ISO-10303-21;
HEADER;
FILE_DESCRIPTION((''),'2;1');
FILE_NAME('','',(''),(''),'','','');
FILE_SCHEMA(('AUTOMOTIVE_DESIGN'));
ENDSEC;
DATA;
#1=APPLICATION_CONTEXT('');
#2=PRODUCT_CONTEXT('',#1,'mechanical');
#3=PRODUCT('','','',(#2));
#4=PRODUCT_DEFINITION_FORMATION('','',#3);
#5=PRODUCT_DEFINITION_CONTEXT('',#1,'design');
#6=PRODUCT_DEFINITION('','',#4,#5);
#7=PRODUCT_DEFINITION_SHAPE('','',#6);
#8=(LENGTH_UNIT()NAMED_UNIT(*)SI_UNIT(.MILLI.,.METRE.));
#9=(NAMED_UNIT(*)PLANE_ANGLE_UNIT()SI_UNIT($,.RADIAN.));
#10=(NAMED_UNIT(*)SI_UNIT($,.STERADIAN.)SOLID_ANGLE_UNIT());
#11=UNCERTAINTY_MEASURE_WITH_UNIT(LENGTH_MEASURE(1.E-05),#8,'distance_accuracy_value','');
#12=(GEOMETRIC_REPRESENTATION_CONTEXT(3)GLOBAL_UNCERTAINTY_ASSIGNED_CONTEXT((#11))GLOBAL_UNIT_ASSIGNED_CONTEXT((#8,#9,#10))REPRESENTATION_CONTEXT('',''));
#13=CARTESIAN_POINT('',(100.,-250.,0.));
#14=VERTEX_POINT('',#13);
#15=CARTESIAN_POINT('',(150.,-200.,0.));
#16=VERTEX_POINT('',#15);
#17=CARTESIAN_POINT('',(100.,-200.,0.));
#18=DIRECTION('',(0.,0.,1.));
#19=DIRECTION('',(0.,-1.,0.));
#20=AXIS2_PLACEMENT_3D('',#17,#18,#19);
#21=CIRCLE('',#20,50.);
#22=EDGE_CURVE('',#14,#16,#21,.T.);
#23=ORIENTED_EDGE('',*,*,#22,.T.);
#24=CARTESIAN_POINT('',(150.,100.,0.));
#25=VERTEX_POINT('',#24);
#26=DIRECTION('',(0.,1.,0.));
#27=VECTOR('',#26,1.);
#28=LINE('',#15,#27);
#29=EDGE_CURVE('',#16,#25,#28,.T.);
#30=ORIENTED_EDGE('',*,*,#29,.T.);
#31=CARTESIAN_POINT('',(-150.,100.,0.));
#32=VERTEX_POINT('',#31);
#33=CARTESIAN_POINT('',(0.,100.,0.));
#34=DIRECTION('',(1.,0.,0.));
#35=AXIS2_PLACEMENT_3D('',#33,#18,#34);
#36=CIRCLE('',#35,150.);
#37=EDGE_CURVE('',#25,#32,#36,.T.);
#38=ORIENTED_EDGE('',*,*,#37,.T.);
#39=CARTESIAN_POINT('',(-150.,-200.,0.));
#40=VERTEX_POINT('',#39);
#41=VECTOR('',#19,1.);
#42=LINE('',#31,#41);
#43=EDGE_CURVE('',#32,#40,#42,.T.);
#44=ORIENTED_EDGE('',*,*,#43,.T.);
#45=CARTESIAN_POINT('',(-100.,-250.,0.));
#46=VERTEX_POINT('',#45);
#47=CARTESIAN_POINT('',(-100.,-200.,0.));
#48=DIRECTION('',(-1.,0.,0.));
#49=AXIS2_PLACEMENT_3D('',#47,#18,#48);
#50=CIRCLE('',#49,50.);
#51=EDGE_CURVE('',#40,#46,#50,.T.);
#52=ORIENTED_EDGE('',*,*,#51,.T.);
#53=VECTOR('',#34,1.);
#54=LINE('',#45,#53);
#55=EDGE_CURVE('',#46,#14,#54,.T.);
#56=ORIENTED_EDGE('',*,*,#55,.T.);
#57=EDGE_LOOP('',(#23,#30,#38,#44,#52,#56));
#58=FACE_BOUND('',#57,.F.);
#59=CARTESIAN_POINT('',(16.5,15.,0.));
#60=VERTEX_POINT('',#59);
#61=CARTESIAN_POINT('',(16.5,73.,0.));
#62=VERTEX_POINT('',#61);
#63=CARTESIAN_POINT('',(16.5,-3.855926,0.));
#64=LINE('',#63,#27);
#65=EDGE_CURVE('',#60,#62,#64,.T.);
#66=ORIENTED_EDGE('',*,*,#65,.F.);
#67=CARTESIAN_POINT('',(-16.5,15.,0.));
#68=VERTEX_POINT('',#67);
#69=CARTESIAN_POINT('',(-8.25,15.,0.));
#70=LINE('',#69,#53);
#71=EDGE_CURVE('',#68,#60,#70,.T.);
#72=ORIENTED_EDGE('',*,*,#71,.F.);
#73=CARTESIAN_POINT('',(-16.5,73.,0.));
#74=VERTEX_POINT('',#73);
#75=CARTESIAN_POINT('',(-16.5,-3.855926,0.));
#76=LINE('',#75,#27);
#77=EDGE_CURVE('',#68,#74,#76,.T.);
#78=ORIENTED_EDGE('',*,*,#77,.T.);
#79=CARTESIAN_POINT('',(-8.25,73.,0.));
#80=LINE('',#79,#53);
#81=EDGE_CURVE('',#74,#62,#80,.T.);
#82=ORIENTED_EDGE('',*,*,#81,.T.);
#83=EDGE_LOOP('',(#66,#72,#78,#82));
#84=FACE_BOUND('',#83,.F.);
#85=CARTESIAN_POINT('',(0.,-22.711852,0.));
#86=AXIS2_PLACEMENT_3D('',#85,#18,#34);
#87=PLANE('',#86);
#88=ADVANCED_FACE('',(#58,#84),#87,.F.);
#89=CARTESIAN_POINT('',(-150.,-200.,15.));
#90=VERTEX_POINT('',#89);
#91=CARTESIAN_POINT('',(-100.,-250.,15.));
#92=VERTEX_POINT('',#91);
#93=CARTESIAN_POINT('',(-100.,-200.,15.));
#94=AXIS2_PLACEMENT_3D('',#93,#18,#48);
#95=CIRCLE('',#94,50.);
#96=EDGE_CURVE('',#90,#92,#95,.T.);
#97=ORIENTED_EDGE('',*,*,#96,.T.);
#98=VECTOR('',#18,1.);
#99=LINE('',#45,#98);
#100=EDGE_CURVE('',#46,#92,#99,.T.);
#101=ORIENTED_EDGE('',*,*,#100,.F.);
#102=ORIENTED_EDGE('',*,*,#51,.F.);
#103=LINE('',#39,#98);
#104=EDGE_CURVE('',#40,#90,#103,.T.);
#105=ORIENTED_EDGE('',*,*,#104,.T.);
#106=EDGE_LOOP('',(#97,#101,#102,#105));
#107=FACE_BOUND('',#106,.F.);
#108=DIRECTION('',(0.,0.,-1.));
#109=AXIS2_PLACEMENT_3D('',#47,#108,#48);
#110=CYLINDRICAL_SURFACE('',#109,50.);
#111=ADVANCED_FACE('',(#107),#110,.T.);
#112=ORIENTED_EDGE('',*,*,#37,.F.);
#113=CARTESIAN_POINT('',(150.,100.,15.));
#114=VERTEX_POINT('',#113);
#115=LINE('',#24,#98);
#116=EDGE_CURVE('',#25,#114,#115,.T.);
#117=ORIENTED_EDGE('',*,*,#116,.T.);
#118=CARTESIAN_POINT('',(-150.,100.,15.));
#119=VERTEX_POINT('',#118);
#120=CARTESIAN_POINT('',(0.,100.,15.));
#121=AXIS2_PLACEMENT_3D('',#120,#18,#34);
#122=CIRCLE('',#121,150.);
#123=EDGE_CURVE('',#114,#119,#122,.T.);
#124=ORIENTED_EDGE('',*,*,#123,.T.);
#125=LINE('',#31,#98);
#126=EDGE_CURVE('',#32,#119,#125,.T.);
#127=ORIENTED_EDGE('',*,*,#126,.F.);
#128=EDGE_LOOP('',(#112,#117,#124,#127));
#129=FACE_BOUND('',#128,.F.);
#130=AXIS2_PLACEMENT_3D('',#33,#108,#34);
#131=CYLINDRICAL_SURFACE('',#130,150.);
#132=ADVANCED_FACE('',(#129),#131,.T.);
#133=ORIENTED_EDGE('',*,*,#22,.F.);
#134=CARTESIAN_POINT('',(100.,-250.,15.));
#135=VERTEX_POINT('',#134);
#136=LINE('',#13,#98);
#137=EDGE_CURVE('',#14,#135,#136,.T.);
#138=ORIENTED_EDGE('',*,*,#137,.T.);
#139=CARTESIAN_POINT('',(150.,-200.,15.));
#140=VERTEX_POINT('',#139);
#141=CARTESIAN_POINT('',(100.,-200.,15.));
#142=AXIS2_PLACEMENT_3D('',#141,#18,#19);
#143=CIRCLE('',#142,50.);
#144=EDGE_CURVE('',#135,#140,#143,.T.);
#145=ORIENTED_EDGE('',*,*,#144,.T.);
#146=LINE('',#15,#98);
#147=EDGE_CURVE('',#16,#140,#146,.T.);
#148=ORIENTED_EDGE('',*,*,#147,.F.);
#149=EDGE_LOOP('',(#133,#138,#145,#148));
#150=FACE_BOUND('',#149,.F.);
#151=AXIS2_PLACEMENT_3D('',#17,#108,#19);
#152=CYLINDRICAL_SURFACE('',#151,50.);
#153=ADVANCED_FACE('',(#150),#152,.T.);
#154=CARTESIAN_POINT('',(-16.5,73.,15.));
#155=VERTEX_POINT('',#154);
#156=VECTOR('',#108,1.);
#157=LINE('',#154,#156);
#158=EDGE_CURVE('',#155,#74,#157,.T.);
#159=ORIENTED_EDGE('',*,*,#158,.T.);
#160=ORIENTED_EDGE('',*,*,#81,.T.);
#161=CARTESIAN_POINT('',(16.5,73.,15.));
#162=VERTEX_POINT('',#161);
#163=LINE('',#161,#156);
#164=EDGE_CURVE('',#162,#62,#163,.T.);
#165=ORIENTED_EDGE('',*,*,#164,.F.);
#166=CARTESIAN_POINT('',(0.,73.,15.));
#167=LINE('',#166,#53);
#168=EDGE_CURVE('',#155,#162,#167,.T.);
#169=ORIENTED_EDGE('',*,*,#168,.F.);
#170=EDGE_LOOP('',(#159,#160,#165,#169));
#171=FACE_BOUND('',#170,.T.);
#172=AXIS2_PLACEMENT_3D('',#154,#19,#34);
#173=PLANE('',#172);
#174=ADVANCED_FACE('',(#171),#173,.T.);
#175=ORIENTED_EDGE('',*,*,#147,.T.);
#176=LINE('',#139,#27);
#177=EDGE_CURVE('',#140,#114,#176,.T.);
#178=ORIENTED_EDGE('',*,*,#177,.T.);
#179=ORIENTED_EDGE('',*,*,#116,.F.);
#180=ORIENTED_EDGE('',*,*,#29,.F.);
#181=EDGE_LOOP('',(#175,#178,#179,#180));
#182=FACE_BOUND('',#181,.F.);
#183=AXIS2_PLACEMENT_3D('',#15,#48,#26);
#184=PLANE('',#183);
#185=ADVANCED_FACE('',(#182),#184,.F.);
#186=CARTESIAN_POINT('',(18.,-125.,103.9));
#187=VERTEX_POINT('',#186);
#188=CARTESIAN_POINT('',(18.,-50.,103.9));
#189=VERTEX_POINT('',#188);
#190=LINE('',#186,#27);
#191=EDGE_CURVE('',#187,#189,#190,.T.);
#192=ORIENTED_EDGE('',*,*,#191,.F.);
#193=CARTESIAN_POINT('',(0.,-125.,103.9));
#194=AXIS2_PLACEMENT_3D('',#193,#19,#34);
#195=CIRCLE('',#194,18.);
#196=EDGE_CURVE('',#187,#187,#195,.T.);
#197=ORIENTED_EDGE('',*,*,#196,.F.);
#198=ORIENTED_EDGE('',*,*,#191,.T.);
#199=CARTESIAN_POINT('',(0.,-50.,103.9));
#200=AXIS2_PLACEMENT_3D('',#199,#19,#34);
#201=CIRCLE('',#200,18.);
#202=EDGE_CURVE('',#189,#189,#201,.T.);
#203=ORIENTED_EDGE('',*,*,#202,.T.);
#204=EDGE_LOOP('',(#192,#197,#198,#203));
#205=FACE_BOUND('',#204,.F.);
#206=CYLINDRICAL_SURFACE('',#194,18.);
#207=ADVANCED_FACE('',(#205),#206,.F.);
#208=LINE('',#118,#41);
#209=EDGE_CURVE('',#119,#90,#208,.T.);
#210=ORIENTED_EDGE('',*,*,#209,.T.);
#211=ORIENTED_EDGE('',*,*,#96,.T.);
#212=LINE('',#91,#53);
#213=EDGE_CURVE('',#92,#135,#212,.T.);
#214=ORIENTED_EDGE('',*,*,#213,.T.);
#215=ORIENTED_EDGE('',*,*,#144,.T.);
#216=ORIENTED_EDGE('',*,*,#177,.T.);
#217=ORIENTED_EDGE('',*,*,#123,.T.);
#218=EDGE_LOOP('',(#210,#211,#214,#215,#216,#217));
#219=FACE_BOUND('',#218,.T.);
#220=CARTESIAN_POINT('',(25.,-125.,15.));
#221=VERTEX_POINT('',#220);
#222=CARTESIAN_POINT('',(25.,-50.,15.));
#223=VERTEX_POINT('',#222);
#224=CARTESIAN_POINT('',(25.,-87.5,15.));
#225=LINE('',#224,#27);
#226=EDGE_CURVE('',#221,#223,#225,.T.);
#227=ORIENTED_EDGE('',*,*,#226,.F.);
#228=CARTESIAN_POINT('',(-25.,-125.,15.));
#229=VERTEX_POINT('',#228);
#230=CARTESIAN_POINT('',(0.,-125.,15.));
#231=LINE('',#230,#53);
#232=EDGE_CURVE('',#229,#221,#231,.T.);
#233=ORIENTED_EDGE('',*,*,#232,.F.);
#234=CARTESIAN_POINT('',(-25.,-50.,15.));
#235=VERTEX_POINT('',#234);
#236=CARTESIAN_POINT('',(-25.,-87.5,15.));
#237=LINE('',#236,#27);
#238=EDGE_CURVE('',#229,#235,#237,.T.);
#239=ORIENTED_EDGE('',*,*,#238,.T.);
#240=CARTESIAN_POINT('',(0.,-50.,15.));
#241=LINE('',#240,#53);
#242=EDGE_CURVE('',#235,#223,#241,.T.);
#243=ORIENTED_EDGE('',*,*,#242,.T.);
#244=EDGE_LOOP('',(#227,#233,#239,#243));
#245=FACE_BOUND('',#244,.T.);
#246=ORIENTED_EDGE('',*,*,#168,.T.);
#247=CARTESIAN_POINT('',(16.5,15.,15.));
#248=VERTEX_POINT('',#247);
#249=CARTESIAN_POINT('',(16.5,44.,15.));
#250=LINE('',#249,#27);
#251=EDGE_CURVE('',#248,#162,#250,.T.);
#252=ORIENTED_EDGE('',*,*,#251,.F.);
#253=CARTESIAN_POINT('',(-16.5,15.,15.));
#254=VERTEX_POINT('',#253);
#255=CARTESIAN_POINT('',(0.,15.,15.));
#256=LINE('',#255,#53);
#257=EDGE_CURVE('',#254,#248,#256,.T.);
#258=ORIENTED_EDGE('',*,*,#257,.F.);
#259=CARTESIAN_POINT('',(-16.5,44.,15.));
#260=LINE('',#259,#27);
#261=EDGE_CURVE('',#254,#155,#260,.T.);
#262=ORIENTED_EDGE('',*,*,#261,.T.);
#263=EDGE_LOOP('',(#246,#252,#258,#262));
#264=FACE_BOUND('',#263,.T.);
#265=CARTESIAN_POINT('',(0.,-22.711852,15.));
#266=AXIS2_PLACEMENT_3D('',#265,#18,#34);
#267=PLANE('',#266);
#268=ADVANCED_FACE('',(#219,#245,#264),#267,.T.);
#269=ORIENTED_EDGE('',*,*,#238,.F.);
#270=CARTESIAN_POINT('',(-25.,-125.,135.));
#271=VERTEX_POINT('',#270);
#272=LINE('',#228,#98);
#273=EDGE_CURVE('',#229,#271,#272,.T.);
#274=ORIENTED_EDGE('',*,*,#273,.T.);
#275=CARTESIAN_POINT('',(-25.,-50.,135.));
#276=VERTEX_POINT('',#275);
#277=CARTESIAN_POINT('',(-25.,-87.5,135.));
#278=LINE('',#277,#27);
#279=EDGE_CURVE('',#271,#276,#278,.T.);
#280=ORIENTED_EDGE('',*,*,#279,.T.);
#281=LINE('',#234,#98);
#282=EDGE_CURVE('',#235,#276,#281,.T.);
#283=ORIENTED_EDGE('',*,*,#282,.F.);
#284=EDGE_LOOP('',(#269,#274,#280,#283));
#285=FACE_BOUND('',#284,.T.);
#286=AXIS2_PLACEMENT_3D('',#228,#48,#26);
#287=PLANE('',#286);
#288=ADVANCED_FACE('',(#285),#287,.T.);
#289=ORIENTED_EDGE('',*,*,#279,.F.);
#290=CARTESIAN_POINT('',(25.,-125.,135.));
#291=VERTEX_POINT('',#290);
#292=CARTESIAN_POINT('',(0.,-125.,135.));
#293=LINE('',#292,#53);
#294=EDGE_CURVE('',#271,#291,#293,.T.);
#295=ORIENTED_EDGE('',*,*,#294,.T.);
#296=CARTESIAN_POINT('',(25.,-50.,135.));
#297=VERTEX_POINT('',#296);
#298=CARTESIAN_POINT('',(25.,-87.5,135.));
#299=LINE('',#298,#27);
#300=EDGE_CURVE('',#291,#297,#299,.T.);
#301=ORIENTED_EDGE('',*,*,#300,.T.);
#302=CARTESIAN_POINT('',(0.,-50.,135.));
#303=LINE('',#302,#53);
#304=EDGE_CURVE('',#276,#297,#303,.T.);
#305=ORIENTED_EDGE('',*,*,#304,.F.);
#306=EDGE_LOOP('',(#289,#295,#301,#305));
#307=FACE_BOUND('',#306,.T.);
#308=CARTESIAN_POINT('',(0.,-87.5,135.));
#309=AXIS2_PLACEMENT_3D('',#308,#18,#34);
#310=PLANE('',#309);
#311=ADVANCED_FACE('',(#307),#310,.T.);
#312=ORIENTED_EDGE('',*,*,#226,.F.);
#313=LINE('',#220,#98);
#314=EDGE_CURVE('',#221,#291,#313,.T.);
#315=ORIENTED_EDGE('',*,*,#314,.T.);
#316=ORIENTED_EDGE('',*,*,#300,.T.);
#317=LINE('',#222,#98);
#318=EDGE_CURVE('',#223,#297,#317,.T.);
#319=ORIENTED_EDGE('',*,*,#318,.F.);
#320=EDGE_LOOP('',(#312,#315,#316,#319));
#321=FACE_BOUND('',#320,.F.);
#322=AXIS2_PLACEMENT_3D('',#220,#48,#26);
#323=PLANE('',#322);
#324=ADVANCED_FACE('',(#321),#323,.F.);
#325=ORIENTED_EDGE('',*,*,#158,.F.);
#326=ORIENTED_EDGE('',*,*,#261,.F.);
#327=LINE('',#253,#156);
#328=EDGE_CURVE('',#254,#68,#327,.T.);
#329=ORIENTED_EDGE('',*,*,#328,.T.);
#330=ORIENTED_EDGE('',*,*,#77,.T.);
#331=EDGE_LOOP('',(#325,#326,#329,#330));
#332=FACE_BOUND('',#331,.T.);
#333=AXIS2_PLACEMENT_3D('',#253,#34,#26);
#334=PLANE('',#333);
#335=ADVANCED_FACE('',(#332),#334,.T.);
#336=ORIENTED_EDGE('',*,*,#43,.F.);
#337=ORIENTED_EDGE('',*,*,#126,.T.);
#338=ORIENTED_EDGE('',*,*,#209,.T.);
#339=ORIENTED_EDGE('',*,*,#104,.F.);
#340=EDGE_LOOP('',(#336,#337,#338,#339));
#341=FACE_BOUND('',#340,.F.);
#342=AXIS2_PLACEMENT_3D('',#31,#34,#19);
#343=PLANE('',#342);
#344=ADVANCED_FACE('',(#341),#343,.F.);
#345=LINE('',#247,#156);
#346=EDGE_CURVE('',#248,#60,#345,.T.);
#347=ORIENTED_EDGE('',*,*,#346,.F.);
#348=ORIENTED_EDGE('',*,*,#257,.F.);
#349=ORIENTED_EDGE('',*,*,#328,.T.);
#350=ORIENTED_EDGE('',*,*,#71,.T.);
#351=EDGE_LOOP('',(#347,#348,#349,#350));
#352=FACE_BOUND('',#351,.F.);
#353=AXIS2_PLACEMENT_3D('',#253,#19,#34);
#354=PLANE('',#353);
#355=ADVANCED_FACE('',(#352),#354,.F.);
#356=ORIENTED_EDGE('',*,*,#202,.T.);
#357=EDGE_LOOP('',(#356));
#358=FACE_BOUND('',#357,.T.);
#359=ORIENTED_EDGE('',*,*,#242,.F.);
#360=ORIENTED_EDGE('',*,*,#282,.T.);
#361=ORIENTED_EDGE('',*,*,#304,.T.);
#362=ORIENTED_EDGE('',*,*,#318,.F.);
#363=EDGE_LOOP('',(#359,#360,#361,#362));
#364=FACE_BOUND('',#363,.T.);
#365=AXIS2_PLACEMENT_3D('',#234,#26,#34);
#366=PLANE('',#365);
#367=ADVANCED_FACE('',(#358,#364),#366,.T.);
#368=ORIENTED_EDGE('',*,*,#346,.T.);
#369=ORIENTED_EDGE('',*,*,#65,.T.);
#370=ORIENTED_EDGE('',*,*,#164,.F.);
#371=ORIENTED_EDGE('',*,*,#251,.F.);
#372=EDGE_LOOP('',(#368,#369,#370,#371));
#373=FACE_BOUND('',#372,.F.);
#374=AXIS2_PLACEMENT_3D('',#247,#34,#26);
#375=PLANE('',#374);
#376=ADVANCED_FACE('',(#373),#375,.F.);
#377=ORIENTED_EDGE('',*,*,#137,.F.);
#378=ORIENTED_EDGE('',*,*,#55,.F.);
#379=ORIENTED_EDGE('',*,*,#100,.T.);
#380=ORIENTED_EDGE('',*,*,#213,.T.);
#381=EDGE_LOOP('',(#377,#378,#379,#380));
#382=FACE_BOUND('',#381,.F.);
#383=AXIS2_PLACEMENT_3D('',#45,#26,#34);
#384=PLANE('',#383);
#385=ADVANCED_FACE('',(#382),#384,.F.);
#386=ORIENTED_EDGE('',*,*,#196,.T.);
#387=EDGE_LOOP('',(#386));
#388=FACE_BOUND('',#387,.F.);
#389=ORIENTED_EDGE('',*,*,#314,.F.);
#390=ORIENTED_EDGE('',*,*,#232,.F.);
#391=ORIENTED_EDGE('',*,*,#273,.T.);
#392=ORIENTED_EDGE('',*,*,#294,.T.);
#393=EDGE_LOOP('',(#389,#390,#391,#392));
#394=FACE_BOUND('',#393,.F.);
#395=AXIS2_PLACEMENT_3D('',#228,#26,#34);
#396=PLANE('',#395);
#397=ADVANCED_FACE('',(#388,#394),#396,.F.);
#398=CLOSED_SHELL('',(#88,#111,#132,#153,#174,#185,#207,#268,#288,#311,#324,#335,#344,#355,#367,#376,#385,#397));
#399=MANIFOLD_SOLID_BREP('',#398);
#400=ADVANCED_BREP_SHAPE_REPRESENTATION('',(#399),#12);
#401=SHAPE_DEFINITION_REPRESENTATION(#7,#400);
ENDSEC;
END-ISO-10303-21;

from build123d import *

# Parameters (mm, degrees)
F1_DEPTH = 15
F2_W     = 33
F2_H     = 58
F3_DEPTH = 15.001
F4_W     = 50
F4_H     = 75
F5_DEPTH = 120
F6_R     = 18
F7_DEPTH = 75


# Not quite as in the source:
# - a feature of the source that left no trace in its solid (it failed there, or was rolled back) is left out


with BuildPart() as f1:
    # F0 (on Top) → F1 (new body)
    with BuildSketch(Plane.XY):
        with BuildLine():
            Line((-100, -250), (100, -250))
            ThreePointArc((100, -250), (135.3553390593, -235.3553390593), (150, -200))
            Line((150, -200), (150, 100))
            ThreePointArc((150, 100), (0, 250), (-150, 100))
            Line((-150, 100), (-150, -200))
            ThreePointArc((-150, -200), (-135.3553390593, -235.3553390593), (-100, -250))
        make_face()
    extrude(amount=F1_DEPTH)

    # F2 (on face) → F3 (cut, through all)
    with BuildSketch(Plane.XY.offset(15)):
        with Locations((0, 44)):
            Rectangle(F2_W, F2_H)
    extrude(amount=-F3_DEPTH, mode=Mode.SUBTRACT)

    # F4 (on face) → F5 (join)
    with BuildSketch(Plane.XY.offset(15)):
        with Locations((0, -87.5)):
            Rectangle(F4_W, F4_H)
    extrude(amount=F5_DEPTH)

    # F6 (on face) → F7 (cut, through all)
    with BuildSketch(Plane.XZ.offset(125)):
        with Locations((0, 103.9)):
            Circle(F6_R)
    extrude(amount=-F7_DEPTH, mode=Mode.SUBTRACT)


solid = f1.part
